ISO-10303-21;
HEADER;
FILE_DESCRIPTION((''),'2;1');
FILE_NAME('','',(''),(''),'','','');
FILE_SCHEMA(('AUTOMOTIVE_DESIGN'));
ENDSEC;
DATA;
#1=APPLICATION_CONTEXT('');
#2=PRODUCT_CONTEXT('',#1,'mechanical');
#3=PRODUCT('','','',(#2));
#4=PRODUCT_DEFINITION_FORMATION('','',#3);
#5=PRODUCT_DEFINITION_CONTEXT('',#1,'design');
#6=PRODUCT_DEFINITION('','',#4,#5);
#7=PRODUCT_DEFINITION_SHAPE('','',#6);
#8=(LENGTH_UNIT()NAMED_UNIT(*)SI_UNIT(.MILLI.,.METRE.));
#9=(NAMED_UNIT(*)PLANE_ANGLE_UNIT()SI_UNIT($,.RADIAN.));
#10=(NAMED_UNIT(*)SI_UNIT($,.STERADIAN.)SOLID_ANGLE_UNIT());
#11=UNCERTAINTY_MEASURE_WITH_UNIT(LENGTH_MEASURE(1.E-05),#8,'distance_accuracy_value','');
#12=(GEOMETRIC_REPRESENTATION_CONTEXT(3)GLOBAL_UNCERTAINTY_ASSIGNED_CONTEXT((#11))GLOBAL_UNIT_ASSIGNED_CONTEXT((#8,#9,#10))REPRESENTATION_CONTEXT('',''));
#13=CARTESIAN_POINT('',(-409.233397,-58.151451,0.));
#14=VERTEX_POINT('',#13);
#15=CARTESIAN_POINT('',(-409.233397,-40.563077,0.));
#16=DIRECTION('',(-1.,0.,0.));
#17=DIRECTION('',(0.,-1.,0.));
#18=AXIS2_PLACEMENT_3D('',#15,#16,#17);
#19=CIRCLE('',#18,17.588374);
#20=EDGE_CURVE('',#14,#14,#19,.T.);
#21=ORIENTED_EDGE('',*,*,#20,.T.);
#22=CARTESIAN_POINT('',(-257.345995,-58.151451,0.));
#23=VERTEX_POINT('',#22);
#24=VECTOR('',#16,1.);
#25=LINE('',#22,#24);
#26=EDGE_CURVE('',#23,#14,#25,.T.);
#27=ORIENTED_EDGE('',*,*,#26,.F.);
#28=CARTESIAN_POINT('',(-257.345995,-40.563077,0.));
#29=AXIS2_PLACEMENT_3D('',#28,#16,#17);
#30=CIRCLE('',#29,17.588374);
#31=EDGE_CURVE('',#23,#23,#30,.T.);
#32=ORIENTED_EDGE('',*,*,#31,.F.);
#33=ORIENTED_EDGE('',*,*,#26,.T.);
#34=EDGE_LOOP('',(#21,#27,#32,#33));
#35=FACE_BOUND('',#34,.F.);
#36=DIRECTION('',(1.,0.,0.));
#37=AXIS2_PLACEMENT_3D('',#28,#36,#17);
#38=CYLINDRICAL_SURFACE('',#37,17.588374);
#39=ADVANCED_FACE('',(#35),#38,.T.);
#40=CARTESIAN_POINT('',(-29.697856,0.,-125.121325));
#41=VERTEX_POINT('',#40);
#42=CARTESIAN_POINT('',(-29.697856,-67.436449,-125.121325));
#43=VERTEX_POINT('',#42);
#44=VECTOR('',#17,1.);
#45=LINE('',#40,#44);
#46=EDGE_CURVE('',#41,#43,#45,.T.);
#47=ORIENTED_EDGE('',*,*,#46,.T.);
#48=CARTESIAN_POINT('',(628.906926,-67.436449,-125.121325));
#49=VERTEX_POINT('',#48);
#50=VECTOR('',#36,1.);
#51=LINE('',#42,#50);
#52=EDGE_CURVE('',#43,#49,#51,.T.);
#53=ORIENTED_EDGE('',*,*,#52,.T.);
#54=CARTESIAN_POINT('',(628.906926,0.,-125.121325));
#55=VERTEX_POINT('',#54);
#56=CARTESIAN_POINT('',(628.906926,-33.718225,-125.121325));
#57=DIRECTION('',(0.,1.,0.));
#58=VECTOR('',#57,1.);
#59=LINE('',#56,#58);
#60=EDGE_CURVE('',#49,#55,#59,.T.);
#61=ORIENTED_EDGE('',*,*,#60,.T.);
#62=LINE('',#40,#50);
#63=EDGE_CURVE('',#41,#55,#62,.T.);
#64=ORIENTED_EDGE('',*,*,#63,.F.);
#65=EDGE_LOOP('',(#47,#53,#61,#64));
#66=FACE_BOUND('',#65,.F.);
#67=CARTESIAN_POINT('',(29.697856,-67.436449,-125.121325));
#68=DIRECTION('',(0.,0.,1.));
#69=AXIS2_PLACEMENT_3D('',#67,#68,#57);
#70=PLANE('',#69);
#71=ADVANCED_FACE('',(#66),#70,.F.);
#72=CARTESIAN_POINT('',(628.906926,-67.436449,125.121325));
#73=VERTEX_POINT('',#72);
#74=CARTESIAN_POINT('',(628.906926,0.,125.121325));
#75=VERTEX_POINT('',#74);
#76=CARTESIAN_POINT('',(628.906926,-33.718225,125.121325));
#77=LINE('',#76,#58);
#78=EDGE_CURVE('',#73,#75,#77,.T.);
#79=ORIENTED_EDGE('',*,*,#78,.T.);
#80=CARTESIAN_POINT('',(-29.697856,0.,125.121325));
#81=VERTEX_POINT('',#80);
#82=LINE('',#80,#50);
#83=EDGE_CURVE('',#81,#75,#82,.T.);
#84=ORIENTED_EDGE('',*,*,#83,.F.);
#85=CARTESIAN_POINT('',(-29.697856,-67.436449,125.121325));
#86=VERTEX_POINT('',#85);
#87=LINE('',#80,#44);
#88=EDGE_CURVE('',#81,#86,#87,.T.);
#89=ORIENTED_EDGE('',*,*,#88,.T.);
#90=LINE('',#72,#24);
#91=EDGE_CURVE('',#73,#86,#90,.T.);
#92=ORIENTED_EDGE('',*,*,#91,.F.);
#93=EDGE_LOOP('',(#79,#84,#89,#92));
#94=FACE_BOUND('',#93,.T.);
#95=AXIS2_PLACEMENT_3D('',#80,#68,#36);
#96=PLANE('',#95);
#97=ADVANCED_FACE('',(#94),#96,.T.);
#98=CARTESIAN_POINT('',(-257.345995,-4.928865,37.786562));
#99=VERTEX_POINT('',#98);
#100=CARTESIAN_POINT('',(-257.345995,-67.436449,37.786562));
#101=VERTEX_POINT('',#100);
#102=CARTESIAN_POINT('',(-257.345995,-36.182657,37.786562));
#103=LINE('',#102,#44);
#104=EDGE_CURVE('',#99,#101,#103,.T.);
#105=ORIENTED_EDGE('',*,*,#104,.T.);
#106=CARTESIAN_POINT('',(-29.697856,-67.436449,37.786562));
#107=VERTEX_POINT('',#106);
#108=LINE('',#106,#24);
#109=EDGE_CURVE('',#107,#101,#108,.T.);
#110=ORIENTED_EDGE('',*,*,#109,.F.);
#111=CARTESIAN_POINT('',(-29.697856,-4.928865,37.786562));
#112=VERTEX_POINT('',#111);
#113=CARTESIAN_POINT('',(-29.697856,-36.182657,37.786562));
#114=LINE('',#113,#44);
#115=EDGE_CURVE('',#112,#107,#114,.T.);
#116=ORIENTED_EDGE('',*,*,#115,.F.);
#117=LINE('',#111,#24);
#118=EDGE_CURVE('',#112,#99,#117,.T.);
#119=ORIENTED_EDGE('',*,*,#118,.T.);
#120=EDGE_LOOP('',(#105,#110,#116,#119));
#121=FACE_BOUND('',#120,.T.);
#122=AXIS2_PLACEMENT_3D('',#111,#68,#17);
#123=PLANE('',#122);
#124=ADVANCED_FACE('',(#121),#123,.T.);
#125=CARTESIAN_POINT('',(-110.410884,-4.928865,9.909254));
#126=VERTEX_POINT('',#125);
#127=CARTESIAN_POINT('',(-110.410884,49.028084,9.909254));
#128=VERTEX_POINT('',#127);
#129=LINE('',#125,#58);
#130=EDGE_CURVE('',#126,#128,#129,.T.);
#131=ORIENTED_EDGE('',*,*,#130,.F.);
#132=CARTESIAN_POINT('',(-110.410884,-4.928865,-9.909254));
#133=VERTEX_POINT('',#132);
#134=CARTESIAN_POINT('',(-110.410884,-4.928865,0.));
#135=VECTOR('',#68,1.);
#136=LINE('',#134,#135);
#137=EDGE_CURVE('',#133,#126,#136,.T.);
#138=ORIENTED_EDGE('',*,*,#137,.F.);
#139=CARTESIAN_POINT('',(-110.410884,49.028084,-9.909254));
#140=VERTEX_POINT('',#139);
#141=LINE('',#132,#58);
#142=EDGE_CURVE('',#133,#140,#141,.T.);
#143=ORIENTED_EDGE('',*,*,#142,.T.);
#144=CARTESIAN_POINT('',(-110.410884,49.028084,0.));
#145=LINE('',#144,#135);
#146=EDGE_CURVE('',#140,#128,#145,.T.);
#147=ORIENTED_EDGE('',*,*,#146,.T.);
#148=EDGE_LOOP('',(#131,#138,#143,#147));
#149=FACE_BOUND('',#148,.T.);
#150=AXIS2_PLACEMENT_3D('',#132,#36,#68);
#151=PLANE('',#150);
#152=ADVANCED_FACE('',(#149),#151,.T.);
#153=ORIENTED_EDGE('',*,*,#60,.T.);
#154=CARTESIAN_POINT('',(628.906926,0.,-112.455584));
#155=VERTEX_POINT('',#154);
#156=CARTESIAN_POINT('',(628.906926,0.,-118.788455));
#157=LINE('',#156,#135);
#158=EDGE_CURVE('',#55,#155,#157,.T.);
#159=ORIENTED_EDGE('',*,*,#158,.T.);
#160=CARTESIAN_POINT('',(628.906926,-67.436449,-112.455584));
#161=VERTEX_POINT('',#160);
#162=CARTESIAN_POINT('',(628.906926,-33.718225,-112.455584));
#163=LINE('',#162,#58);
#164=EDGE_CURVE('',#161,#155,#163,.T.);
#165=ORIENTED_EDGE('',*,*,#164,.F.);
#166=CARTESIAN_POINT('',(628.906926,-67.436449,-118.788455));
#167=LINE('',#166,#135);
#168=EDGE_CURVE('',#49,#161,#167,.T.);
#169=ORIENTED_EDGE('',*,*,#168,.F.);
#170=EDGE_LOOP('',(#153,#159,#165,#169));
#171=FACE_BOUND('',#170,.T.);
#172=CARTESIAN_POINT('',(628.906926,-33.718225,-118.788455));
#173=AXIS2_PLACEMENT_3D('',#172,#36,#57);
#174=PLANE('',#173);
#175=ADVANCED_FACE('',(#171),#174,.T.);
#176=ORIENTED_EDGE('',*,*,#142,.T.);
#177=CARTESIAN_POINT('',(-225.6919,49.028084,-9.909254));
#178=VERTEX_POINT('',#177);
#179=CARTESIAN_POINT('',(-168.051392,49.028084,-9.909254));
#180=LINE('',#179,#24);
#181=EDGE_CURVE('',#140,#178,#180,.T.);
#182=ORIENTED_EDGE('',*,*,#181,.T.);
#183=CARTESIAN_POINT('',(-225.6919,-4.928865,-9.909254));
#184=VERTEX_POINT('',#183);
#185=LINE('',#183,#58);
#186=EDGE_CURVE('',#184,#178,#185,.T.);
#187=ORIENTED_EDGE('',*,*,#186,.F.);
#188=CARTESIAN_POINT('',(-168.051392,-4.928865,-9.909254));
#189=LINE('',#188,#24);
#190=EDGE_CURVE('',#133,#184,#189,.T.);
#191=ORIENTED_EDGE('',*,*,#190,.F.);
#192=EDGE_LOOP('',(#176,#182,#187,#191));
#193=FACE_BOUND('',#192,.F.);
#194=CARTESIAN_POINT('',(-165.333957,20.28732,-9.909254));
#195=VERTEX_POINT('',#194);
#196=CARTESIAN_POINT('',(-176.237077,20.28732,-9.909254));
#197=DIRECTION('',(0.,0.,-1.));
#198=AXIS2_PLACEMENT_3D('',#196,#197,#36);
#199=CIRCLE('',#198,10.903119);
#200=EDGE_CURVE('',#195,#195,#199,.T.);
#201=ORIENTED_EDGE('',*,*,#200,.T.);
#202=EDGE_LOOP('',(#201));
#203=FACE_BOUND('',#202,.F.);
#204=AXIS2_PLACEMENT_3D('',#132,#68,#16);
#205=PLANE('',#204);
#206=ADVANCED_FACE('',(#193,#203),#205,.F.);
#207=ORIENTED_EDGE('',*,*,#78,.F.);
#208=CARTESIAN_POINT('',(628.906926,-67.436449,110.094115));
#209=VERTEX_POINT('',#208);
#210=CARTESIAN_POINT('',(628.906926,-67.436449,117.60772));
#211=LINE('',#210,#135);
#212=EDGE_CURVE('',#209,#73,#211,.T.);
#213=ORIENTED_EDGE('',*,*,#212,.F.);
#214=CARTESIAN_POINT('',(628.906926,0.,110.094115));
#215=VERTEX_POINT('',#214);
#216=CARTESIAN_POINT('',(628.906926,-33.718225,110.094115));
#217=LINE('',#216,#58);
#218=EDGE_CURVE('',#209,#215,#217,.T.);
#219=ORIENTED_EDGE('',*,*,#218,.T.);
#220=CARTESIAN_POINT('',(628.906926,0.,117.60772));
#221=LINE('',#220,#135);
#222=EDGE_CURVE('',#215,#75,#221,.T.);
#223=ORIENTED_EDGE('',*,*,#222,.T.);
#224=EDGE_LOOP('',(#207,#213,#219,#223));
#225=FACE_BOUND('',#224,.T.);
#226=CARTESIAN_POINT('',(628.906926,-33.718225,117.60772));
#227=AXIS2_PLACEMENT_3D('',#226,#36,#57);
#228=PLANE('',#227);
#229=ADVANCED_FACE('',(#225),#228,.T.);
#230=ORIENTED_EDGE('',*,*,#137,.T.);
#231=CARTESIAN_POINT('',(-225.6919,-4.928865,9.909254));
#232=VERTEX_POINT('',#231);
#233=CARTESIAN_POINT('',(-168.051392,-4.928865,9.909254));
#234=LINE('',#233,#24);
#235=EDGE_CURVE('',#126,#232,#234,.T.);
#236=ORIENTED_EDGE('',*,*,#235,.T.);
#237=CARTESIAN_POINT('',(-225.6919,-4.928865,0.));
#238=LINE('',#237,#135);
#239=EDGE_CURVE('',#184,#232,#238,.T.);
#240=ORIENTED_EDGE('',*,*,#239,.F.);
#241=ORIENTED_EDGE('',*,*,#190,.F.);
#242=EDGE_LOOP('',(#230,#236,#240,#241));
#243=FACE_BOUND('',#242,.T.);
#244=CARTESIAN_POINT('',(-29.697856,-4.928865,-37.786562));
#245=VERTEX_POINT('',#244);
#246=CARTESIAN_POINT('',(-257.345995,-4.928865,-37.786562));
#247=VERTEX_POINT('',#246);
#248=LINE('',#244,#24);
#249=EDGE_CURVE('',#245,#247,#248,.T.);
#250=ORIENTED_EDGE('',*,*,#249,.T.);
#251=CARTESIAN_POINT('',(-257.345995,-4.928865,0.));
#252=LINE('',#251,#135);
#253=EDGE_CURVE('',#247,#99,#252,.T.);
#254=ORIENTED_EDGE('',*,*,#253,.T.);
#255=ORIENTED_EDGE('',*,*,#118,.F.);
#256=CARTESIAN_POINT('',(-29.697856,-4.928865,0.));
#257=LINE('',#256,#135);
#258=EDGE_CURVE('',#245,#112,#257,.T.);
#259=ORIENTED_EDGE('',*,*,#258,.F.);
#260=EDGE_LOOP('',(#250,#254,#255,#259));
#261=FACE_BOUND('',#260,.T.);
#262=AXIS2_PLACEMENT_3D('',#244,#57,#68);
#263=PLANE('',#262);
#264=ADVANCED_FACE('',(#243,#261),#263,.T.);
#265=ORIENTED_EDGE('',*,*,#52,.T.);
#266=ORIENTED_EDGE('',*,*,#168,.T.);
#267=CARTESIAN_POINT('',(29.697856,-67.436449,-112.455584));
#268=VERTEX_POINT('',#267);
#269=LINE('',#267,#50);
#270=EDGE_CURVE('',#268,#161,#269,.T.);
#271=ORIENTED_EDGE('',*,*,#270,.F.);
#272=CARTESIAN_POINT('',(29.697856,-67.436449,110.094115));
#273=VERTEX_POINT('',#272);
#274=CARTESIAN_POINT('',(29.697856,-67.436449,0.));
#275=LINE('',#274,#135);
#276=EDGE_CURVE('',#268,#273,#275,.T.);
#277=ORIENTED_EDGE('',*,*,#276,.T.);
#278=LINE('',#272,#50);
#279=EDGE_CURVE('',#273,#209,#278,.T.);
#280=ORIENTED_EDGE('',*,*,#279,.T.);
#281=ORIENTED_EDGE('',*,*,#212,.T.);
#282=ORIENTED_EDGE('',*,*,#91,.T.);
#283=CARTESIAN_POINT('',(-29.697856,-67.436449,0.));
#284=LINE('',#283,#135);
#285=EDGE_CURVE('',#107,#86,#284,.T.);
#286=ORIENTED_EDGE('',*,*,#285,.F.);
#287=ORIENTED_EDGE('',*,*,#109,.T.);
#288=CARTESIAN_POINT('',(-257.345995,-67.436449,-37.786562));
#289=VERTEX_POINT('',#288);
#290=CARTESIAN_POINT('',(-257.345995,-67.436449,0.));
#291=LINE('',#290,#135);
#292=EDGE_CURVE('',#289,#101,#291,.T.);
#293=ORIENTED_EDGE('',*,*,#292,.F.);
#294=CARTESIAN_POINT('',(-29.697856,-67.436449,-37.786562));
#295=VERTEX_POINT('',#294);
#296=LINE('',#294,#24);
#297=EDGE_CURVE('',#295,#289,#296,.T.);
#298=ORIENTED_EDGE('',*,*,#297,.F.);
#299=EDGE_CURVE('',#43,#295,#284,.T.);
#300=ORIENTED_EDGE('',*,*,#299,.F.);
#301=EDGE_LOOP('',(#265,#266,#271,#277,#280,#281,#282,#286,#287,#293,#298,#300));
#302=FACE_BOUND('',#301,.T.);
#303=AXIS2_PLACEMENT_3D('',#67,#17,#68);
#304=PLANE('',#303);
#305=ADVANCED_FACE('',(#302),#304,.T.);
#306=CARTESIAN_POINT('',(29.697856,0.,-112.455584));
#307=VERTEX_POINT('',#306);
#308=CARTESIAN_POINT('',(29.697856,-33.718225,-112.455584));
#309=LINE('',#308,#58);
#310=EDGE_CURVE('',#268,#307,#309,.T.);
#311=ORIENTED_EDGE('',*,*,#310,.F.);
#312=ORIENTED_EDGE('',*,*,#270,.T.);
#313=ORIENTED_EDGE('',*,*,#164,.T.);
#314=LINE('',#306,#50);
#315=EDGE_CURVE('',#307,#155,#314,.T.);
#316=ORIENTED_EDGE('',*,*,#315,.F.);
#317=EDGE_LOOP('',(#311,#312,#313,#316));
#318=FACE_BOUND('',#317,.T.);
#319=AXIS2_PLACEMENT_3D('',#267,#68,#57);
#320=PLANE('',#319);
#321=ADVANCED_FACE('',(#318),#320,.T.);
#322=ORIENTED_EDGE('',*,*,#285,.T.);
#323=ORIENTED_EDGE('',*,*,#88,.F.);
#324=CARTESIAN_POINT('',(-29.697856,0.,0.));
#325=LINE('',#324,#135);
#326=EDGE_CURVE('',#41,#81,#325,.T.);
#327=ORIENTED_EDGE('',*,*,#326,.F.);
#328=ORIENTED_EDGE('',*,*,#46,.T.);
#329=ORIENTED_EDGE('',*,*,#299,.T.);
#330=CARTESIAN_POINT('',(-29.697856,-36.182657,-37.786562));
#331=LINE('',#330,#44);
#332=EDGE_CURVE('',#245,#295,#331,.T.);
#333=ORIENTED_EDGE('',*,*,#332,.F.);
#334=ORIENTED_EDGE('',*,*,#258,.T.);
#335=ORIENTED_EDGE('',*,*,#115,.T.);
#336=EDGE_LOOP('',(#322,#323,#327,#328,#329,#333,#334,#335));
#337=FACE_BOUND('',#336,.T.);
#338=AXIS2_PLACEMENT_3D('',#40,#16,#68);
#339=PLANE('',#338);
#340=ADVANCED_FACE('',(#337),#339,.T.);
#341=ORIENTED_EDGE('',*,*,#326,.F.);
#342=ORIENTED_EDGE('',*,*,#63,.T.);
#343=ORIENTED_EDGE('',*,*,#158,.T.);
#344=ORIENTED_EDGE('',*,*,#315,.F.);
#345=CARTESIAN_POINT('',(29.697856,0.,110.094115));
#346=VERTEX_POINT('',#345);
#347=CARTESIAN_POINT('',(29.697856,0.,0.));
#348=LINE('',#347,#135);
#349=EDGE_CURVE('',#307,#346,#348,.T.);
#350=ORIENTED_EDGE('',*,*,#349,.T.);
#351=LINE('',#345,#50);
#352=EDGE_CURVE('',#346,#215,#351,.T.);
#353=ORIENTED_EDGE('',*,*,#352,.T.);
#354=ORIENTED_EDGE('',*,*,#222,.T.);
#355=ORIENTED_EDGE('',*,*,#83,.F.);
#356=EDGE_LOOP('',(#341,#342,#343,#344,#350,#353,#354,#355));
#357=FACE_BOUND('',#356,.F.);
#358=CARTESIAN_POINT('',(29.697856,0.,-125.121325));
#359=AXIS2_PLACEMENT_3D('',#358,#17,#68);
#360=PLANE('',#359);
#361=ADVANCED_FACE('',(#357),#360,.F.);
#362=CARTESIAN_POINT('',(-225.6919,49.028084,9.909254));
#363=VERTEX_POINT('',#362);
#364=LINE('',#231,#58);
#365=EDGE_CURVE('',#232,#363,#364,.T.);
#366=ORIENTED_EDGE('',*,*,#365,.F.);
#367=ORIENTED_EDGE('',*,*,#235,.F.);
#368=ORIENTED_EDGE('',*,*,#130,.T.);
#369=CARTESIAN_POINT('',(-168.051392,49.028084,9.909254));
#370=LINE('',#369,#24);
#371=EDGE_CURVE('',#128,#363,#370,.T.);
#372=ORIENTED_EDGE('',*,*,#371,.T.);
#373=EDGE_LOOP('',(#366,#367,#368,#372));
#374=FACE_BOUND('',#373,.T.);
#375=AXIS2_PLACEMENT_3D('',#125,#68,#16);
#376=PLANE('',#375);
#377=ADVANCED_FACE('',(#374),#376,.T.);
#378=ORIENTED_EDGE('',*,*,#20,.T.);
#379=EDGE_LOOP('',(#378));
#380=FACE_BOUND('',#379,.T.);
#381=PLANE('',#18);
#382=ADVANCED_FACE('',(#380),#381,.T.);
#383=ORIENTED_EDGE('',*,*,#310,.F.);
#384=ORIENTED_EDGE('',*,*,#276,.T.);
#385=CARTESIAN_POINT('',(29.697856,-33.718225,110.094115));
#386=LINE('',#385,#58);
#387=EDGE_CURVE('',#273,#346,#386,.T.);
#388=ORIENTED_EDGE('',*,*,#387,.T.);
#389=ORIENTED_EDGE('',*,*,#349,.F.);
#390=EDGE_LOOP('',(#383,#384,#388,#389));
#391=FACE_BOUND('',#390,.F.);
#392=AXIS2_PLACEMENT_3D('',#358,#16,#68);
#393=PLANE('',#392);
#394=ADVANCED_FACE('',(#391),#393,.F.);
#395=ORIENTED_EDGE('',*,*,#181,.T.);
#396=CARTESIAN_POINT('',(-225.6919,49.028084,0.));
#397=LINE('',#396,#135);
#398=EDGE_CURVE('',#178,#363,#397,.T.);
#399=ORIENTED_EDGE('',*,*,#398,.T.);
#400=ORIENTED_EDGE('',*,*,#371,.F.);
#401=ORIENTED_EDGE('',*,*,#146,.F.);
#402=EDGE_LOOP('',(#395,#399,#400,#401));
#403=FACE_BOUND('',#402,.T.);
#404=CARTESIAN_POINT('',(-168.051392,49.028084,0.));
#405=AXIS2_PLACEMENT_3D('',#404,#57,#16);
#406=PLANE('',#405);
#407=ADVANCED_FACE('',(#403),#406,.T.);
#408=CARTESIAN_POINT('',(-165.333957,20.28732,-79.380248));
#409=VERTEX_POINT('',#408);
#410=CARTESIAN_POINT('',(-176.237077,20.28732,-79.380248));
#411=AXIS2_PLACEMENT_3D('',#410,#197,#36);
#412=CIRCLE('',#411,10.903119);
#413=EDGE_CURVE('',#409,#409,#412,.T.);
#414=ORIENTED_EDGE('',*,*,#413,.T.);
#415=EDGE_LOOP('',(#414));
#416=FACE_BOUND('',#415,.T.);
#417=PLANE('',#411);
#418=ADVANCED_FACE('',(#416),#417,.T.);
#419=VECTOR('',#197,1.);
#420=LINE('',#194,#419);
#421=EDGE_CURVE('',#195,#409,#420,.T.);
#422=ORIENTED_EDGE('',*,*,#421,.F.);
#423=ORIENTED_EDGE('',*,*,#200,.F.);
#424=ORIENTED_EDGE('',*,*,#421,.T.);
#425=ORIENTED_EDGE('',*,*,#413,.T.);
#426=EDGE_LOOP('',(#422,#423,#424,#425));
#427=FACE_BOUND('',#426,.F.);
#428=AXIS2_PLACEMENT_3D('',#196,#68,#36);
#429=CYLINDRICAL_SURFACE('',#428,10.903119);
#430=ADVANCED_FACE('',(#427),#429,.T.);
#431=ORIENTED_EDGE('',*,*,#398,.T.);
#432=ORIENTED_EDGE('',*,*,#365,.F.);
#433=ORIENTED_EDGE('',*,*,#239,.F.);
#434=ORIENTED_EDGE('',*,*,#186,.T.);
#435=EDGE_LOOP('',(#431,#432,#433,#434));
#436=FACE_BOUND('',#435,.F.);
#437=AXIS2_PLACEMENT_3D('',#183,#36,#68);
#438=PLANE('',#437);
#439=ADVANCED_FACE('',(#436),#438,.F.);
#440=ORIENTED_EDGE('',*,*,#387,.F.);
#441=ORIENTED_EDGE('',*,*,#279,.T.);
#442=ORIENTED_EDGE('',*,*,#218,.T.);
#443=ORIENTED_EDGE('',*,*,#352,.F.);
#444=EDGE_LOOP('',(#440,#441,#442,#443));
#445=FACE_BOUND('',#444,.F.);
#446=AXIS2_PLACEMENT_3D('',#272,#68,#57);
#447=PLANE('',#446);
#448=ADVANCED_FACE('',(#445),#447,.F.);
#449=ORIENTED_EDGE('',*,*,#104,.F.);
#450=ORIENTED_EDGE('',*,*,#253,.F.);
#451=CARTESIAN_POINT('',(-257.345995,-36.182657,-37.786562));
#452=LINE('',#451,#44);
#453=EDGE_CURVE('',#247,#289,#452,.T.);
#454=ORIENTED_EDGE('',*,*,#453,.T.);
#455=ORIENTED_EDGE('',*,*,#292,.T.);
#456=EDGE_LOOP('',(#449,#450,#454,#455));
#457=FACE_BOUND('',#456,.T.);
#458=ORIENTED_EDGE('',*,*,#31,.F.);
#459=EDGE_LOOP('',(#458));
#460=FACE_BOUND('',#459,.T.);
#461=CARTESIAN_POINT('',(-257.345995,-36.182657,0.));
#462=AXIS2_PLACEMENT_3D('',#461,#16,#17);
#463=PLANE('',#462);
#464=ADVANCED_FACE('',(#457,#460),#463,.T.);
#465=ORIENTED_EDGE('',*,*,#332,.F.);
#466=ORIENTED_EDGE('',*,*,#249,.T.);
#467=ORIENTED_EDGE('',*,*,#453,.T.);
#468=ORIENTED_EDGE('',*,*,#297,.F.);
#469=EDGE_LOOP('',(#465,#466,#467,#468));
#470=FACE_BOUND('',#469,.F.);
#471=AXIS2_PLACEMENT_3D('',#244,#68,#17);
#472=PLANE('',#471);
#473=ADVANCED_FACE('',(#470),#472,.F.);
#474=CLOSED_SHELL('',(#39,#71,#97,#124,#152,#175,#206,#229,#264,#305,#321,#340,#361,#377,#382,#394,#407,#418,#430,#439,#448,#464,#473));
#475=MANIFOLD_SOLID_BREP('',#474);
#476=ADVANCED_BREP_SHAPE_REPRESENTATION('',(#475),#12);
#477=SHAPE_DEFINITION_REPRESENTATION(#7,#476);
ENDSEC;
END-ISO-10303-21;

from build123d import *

# Parameters (mm, degrees)
F0_W      = 59.395711869
F0_H      = 250.2426505089
F1_DEPTH  = 67.4364492297
F2_R      = 17.4264129212
F3_DEPTH  = 222.8358983994
F4_W      = 62.507584691
F4_H      = 75.5731239915
F5_DEPTH  = 227.648139
F6_W      = 115.2810156345
F6_H      = 19.8185071349
F7_DEPTH  = 53.9569482207
F8_W      = 67.4364492297
F8_H      = 12.6657411456
F8_H_2    = 15.0272101164
F9_DEPTH  = 599.2090702057
F10_R     = 17.5883740648
F11_DEPTH = 151.8874019384
F12_R     = 10.9031193455
F13_DEPTH = 69.4709941745


# Not quite as in the source:
# - a feature names something its author has since deleted; it is built from what else it names


with BuildPart() as f1:
    # F0 (on Front) → F1 (new body)
    with BuildSketch(Plane.XZ):
        Rectangle(F0_W, F0_H)
    extrude(amount=F1_DEPTH)

    # F2 (on face) → F3 (join)
    with BuildSketch(Plane.XY.offset(125.1213252544)):
        with Locations((0, -33.2162864506)):
            Circle(F2_R)
    extrude(amount=-F3_DEPTH)

    # F4 (on face) → F5 (join)
    with BuildSketch(Plane(origin=(-29.6978559345, 0, 0), x_dir=(0, -1, 0), z_dir=(-1, 0, 0))):
        with Locations((36.1826568842, 0)):
            Rectangle(F4_W, F4_H)
    extrude(amount=F5_DEPTH)

    # F6 (on face) → F7 (join)
    with BuildSketch(Plane(origin=(0, -4.9288645387, 0), x_dir=(-1, 0, 0), z_dir=(0, 1, 0))):
        with Locations((168.05139184, 0)):
            Rectangle(F6_W, F6_H)
    extrude(amount=F7_DEPTH)

    # F8 (on face) → F9 (join)
    with BuildSketch(Plane.YZ.offset(29.6978559345)):
        with Locations((-33.7182246149, -118.7884546816)):
            Rectangle(F8_W, F8_H)
        with Locations((-33.7182246149, 117.6077201962)):
            Rectangle(F8_W, F8_H_2)
    extrude(amount=F9_DEPTH)

    # F10 (on face) → F11 (join)
    with BuildSketch(Plane(origin=(-257.3459949344, 0, 0), x_dir=(0, -1, 0), z_dir=(-1, 0, 0))):
        with Locations((40.5630767345, 0)):
            Circle(F10_R)
    extrude(amount=F11_DEPTH)

    # F12 (on face) → F13 (join)
    with BuildSketch(Plane(origin=(0, 0, -9.9092535675), x_dir=(1, 0, 0), z_dir=(0, 0, -1))):
        with Locations((-176.2370765209, -20.2873200178)):
            Circle(F12_R)
    extrude(amount=F13_DEPTH)


solid = f1.part
